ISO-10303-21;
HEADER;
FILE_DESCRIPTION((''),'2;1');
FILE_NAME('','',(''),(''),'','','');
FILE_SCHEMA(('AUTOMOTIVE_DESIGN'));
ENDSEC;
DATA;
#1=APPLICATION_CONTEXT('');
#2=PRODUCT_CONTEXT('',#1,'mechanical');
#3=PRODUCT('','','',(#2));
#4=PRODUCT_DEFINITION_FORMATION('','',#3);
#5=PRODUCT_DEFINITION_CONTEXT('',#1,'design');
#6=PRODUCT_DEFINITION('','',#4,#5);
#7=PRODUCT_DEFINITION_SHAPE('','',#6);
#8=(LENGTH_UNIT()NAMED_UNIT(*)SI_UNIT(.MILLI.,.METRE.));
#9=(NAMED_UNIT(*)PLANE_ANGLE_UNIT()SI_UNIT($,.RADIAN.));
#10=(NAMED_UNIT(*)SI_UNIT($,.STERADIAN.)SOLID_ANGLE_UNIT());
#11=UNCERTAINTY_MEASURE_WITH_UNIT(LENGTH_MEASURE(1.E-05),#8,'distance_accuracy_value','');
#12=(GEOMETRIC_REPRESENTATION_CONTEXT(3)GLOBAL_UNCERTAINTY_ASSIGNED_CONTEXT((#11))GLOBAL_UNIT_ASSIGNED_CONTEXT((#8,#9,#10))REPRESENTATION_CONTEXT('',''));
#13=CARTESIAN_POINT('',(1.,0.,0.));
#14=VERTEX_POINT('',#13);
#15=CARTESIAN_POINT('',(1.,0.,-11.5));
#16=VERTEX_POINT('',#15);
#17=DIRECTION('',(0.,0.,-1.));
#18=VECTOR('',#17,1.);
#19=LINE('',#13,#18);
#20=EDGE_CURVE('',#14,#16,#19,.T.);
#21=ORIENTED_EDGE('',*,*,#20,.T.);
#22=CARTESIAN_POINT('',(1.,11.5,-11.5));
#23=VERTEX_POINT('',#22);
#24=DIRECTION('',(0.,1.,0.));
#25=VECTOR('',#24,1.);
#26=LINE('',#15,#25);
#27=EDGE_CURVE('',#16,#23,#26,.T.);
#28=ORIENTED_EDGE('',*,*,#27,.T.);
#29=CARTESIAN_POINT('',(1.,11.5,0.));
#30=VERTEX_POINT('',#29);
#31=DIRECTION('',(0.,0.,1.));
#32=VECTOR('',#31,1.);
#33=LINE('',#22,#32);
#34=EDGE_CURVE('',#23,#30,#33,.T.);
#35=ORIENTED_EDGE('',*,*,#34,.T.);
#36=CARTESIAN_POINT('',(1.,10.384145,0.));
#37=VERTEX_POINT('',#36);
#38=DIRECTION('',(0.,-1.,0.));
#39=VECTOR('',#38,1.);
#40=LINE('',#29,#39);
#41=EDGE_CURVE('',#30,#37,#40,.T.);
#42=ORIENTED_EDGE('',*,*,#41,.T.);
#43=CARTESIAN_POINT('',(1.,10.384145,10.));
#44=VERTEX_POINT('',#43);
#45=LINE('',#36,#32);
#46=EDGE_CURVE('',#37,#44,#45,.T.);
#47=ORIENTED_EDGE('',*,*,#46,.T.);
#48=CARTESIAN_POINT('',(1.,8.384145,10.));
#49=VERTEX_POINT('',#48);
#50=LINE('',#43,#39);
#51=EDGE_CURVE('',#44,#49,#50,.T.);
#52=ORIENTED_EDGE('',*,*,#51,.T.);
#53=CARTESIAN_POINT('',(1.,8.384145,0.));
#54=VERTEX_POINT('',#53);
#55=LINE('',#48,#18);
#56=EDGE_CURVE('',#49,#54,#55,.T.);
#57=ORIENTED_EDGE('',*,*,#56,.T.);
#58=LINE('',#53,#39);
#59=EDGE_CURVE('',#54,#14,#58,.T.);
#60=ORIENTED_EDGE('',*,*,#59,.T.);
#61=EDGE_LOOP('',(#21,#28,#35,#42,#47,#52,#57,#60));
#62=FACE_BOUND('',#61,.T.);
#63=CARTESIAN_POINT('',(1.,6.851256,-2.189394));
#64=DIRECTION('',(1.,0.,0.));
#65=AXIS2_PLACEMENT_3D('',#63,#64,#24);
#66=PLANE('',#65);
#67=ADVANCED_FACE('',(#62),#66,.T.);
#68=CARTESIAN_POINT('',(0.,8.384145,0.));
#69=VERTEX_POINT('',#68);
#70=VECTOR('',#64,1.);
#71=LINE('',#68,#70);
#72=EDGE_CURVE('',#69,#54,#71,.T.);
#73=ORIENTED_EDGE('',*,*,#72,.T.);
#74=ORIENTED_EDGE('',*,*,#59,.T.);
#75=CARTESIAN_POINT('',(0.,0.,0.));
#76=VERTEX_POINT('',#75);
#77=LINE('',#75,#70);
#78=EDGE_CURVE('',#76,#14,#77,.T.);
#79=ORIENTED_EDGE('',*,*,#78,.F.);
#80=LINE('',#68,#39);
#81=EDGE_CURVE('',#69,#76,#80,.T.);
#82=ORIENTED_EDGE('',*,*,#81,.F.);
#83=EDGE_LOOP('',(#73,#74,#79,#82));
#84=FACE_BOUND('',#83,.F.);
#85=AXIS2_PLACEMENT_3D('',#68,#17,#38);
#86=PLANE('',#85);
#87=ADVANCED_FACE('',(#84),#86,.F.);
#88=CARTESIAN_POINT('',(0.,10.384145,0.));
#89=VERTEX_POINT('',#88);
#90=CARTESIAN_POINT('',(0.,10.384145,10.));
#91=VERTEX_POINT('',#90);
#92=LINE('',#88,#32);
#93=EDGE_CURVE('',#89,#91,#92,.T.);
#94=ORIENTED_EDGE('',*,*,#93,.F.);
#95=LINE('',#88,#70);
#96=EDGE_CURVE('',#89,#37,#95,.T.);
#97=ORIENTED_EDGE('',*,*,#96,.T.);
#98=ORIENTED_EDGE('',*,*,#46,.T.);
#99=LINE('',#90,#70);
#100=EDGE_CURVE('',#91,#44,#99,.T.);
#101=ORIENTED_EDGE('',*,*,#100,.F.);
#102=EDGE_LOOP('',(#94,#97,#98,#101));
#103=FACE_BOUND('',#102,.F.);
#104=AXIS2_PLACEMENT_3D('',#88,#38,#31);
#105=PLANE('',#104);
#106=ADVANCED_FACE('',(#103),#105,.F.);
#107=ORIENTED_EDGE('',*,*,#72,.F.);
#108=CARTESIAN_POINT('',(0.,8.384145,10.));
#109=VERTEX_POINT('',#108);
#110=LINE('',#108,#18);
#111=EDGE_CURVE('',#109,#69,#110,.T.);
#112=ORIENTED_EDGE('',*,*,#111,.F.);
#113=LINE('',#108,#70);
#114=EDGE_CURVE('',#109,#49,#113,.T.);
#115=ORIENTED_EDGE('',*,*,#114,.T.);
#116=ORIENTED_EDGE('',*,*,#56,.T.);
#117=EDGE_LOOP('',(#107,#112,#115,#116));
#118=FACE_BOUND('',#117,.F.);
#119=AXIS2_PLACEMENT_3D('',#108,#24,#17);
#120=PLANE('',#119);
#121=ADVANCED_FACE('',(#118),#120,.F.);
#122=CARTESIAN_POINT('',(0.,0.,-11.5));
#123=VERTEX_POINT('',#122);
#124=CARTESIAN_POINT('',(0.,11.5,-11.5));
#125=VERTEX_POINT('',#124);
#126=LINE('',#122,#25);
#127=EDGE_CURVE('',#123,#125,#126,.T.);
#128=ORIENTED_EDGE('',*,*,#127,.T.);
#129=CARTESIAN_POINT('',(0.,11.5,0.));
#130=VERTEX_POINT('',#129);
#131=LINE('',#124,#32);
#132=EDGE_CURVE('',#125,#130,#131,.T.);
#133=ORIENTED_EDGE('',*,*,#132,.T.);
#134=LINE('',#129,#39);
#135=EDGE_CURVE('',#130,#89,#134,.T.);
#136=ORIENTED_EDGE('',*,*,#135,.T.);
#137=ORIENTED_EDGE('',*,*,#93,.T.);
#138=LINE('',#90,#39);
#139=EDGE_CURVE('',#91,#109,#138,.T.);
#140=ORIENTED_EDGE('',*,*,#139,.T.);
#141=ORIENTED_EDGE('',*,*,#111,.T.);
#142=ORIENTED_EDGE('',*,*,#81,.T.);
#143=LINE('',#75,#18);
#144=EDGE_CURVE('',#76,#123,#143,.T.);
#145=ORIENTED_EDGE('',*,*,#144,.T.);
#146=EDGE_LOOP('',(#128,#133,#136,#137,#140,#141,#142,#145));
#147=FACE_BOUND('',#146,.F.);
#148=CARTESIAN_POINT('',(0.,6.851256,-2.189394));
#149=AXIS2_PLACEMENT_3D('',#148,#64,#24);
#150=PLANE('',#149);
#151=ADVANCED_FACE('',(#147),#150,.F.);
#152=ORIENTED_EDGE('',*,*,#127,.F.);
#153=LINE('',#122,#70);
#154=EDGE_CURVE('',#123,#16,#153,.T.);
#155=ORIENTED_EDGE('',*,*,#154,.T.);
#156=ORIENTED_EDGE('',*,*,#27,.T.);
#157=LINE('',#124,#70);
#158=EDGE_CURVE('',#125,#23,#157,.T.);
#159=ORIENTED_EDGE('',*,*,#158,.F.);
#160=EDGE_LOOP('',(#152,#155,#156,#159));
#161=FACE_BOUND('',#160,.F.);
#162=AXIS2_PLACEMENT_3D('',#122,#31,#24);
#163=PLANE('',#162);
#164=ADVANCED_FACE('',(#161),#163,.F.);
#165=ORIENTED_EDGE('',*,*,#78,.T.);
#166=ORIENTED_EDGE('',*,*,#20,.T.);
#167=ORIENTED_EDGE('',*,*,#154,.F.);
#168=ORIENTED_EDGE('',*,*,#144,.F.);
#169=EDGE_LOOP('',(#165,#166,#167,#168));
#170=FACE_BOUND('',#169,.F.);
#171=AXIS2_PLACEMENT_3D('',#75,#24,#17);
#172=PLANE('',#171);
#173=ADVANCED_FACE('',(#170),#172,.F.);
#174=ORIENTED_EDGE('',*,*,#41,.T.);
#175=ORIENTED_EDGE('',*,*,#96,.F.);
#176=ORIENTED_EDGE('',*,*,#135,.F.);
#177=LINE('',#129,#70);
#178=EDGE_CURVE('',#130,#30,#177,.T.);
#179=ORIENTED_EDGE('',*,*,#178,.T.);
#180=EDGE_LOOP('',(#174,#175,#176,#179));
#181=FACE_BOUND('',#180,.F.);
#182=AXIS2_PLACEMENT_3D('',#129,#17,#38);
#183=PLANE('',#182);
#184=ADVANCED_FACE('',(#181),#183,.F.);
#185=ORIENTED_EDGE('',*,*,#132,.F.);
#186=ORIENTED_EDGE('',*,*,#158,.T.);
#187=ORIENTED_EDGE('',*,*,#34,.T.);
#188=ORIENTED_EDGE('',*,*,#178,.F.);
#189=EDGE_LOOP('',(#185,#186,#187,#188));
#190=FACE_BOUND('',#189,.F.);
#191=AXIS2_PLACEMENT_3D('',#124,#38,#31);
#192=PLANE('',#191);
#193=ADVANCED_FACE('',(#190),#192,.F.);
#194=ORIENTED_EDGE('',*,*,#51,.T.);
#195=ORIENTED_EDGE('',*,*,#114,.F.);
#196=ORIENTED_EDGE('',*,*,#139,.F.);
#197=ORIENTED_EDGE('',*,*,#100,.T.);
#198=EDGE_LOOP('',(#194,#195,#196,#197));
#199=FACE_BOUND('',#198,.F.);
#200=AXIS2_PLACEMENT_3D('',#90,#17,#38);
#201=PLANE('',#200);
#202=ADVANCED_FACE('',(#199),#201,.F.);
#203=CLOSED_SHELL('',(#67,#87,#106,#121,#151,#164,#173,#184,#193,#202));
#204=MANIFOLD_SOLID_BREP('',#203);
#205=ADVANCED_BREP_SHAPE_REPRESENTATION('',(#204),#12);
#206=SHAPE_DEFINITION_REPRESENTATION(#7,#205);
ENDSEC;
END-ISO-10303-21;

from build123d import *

# Parameters (mm, degrees)
F1_DEPTH = 1


# Not quite as in the source:
# - a feature names something its author has since deleted; it is built from what else it names


with BuildPart() as f1:
    # F0 (on Right) → F1 (new body)
    with BuildSketch(Plane.YZ):
        Polygon((8.384144865, 0), (0, 0), (0, -11.5), (11.5, -11.5), (11.5, 0), (10.384144865, 0), (10.384144865, 10), (8.384144865, 10), align=None)
    extrude(amount=F1_DEPTH)


solid = f1.part
